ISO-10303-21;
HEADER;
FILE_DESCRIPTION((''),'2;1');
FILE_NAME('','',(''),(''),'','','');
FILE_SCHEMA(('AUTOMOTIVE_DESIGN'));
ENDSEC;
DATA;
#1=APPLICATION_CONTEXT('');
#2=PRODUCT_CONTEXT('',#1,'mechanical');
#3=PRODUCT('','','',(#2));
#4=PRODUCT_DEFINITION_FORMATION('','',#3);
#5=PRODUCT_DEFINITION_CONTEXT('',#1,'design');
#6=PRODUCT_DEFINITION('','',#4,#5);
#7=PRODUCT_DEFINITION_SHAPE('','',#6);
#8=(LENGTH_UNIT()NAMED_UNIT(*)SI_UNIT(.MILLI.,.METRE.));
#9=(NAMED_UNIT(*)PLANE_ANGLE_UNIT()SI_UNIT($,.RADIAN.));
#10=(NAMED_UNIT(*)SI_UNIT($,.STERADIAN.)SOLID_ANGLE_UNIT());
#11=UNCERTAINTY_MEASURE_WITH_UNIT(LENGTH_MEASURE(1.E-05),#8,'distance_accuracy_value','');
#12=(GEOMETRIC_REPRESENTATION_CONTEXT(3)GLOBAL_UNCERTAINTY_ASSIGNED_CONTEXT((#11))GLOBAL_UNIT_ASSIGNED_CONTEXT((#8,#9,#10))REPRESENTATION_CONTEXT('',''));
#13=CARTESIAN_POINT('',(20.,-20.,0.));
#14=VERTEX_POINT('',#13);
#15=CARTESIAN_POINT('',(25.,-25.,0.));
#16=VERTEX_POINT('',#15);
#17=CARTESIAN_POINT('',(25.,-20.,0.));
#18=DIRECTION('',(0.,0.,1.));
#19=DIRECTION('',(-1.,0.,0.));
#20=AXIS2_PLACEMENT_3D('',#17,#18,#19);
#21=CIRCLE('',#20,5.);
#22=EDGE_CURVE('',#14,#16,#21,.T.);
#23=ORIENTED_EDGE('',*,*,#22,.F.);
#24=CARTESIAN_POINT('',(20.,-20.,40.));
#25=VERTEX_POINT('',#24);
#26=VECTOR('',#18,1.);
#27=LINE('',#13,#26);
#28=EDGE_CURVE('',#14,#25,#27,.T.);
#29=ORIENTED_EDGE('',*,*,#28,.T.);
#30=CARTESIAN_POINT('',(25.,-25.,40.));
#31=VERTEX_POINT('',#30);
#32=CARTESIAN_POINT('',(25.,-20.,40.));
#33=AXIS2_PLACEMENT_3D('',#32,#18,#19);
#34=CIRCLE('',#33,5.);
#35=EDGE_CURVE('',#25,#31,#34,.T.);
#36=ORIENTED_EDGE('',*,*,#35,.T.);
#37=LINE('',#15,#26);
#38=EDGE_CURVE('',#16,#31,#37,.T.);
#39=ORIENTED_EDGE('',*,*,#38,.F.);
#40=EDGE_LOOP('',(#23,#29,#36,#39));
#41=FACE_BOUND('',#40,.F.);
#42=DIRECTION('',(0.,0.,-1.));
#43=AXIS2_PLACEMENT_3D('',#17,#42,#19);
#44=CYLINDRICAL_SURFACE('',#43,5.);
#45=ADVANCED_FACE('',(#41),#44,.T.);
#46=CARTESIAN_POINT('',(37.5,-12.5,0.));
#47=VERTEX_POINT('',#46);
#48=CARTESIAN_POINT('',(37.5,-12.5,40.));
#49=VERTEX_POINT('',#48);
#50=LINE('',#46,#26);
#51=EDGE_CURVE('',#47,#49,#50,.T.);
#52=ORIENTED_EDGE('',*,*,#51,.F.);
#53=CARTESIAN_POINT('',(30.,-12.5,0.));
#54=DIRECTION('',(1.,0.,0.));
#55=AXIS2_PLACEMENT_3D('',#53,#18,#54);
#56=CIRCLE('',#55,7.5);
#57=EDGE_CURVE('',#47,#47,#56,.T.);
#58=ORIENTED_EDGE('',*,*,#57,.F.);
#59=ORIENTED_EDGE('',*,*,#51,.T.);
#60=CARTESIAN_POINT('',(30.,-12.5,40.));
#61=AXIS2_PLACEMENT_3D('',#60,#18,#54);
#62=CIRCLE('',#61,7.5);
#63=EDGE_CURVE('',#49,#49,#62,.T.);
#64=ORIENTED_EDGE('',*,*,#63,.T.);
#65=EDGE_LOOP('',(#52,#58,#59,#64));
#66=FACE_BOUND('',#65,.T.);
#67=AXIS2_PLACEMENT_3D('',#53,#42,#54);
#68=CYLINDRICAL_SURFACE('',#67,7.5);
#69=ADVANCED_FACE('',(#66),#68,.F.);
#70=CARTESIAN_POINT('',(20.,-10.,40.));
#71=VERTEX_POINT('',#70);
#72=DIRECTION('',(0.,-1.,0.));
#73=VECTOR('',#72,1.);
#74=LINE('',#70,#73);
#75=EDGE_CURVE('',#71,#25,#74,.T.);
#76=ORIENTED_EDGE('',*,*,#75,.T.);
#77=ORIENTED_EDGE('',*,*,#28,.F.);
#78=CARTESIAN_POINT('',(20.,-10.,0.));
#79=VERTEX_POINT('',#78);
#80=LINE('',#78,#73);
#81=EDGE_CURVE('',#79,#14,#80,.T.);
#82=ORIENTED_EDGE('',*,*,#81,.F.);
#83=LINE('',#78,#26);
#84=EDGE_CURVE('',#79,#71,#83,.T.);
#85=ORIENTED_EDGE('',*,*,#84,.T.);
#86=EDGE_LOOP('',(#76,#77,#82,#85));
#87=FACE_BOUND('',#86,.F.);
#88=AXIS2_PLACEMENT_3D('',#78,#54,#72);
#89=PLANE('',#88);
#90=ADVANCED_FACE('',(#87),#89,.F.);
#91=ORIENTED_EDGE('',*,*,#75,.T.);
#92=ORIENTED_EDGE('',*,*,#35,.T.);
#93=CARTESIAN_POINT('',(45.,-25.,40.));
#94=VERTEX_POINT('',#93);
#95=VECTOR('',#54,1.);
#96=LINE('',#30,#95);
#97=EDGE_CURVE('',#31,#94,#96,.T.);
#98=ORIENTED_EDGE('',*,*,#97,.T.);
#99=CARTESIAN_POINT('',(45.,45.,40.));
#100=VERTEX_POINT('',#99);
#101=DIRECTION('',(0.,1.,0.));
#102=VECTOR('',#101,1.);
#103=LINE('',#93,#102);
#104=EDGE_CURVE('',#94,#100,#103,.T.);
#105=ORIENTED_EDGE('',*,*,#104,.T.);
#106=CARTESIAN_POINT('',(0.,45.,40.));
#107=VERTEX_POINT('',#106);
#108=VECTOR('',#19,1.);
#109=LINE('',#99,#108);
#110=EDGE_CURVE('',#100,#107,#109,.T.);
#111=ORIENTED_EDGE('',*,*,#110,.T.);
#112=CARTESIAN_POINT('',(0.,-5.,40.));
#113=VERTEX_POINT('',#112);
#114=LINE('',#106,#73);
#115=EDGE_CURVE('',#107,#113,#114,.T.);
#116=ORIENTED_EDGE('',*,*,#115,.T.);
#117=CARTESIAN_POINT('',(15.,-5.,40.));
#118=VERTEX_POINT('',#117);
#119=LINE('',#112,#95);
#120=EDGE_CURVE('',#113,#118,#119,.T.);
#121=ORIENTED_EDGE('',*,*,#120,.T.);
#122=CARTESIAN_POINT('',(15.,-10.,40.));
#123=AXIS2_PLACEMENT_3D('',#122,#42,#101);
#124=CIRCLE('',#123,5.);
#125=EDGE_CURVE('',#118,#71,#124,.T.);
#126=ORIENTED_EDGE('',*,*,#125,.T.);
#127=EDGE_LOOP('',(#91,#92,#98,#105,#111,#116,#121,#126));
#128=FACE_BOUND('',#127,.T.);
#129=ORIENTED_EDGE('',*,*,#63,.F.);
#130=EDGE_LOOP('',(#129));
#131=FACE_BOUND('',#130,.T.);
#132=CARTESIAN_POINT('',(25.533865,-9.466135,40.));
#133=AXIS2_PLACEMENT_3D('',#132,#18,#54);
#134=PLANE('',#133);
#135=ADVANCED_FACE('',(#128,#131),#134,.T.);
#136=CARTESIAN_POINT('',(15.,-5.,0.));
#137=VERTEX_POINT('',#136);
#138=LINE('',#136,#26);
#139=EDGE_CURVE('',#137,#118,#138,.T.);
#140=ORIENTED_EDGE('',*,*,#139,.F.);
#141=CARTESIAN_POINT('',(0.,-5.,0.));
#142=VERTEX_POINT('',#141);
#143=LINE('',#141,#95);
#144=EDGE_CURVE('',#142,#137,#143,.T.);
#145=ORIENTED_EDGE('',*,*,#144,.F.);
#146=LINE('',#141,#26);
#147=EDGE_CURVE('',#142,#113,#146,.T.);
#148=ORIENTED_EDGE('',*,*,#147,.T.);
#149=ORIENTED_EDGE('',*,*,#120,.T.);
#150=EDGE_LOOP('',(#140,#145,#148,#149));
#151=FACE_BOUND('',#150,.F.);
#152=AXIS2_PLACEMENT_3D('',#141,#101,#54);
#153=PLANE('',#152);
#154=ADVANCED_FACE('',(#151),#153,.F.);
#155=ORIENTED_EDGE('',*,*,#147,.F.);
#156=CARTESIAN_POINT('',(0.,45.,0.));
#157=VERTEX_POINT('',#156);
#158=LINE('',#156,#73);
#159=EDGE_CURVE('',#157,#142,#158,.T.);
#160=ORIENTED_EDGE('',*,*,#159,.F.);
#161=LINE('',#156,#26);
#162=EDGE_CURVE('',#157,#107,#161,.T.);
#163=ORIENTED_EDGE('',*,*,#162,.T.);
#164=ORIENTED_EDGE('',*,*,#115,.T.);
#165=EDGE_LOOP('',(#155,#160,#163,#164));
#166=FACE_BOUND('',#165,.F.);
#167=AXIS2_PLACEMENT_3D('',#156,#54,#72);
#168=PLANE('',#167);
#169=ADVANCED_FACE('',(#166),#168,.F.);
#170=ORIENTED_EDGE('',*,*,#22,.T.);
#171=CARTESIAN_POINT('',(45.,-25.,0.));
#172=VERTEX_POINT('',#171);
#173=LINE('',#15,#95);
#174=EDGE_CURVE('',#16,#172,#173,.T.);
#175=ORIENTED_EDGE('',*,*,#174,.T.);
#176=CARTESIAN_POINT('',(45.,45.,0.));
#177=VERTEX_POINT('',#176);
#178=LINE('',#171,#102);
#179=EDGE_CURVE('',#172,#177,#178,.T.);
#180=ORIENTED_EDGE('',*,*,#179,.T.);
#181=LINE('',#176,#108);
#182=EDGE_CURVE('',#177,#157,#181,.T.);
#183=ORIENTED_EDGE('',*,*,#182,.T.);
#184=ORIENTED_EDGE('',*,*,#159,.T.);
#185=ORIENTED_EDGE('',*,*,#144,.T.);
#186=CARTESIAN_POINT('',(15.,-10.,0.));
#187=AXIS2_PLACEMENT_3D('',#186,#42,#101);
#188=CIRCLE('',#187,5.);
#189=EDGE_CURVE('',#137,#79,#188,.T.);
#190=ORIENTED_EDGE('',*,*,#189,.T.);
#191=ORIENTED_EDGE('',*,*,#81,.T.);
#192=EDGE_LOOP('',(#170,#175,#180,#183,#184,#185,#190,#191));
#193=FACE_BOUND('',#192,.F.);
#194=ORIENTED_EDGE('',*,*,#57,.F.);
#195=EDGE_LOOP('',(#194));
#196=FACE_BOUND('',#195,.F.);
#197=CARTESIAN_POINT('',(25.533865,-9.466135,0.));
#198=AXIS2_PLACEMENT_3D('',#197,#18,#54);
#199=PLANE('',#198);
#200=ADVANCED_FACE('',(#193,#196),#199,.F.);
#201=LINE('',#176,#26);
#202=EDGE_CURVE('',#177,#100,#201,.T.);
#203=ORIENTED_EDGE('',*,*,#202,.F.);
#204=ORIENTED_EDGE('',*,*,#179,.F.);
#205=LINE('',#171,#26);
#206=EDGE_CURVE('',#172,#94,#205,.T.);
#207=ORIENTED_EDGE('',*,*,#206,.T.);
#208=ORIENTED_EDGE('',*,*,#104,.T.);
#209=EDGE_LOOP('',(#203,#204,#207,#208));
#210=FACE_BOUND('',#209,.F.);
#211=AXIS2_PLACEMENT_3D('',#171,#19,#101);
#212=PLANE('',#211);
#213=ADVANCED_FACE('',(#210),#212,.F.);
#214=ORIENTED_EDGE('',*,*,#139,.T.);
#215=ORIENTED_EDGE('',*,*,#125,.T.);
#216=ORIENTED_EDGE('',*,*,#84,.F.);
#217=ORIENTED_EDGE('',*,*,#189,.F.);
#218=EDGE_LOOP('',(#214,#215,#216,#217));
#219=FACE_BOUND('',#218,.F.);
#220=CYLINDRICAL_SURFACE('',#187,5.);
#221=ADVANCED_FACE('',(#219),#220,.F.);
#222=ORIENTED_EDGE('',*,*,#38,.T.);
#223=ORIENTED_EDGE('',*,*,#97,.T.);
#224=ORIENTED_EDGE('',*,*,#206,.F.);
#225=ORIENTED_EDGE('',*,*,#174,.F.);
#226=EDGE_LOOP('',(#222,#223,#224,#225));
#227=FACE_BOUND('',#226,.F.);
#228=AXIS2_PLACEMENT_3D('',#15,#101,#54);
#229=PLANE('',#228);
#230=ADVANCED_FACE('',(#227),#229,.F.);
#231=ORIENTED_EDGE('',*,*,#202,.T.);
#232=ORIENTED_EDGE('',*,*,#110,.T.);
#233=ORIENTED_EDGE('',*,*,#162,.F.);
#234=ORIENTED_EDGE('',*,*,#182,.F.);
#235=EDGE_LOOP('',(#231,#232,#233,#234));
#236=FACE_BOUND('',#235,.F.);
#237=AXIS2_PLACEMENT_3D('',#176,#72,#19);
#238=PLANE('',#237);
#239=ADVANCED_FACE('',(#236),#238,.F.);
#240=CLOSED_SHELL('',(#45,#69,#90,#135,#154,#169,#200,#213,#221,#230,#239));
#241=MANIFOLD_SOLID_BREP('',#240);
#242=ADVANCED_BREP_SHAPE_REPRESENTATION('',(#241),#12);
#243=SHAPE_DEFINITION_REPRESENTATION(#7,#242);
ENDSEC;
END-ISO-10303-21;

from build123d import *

# Parameters (mm, degrees)
F0_R     = 7.5
F1_DEPTH = 40


# Not quite as in the source:
# - a feature names something its author has since deleted; it is built from what else it names


with BuildPart() as f1:
    # F0 (on Top) → F1 (new body)
    with BuildSketch(Plane.XY):
        with BuildLine():
            Line((40, 0), (0, 0))
            Line((0, 0), (0, -5))
            Line((0, -5), (15, -5))
            ThreePointArc((15, -5), (18.5355339059, -6.4644660941), (20, -10))
            Line((20, -10), (20, -20))
            ThreePointArc((20, -20), (21.4644660941, -23.5355339059), (25, -25))
            Line((25, -25), (35, -25))
            Line((35, -25), (45, -25))
            Line((45, -25), (45, -19.1631559283))
            Line((45, -19.1631559283), (45, 0))
            Line((45, 0), (40, 0))
        make_face()
        with Locations((30, -12.5)):
            Circle(F0_R, mode=Mode.SUBTRACT)
        Polygon((0, 45), (0, 0), (40, 0), (45, 0), (45, 45), align=None)
    extrude(amount=F1_DEPTH)


solid = f1.part
